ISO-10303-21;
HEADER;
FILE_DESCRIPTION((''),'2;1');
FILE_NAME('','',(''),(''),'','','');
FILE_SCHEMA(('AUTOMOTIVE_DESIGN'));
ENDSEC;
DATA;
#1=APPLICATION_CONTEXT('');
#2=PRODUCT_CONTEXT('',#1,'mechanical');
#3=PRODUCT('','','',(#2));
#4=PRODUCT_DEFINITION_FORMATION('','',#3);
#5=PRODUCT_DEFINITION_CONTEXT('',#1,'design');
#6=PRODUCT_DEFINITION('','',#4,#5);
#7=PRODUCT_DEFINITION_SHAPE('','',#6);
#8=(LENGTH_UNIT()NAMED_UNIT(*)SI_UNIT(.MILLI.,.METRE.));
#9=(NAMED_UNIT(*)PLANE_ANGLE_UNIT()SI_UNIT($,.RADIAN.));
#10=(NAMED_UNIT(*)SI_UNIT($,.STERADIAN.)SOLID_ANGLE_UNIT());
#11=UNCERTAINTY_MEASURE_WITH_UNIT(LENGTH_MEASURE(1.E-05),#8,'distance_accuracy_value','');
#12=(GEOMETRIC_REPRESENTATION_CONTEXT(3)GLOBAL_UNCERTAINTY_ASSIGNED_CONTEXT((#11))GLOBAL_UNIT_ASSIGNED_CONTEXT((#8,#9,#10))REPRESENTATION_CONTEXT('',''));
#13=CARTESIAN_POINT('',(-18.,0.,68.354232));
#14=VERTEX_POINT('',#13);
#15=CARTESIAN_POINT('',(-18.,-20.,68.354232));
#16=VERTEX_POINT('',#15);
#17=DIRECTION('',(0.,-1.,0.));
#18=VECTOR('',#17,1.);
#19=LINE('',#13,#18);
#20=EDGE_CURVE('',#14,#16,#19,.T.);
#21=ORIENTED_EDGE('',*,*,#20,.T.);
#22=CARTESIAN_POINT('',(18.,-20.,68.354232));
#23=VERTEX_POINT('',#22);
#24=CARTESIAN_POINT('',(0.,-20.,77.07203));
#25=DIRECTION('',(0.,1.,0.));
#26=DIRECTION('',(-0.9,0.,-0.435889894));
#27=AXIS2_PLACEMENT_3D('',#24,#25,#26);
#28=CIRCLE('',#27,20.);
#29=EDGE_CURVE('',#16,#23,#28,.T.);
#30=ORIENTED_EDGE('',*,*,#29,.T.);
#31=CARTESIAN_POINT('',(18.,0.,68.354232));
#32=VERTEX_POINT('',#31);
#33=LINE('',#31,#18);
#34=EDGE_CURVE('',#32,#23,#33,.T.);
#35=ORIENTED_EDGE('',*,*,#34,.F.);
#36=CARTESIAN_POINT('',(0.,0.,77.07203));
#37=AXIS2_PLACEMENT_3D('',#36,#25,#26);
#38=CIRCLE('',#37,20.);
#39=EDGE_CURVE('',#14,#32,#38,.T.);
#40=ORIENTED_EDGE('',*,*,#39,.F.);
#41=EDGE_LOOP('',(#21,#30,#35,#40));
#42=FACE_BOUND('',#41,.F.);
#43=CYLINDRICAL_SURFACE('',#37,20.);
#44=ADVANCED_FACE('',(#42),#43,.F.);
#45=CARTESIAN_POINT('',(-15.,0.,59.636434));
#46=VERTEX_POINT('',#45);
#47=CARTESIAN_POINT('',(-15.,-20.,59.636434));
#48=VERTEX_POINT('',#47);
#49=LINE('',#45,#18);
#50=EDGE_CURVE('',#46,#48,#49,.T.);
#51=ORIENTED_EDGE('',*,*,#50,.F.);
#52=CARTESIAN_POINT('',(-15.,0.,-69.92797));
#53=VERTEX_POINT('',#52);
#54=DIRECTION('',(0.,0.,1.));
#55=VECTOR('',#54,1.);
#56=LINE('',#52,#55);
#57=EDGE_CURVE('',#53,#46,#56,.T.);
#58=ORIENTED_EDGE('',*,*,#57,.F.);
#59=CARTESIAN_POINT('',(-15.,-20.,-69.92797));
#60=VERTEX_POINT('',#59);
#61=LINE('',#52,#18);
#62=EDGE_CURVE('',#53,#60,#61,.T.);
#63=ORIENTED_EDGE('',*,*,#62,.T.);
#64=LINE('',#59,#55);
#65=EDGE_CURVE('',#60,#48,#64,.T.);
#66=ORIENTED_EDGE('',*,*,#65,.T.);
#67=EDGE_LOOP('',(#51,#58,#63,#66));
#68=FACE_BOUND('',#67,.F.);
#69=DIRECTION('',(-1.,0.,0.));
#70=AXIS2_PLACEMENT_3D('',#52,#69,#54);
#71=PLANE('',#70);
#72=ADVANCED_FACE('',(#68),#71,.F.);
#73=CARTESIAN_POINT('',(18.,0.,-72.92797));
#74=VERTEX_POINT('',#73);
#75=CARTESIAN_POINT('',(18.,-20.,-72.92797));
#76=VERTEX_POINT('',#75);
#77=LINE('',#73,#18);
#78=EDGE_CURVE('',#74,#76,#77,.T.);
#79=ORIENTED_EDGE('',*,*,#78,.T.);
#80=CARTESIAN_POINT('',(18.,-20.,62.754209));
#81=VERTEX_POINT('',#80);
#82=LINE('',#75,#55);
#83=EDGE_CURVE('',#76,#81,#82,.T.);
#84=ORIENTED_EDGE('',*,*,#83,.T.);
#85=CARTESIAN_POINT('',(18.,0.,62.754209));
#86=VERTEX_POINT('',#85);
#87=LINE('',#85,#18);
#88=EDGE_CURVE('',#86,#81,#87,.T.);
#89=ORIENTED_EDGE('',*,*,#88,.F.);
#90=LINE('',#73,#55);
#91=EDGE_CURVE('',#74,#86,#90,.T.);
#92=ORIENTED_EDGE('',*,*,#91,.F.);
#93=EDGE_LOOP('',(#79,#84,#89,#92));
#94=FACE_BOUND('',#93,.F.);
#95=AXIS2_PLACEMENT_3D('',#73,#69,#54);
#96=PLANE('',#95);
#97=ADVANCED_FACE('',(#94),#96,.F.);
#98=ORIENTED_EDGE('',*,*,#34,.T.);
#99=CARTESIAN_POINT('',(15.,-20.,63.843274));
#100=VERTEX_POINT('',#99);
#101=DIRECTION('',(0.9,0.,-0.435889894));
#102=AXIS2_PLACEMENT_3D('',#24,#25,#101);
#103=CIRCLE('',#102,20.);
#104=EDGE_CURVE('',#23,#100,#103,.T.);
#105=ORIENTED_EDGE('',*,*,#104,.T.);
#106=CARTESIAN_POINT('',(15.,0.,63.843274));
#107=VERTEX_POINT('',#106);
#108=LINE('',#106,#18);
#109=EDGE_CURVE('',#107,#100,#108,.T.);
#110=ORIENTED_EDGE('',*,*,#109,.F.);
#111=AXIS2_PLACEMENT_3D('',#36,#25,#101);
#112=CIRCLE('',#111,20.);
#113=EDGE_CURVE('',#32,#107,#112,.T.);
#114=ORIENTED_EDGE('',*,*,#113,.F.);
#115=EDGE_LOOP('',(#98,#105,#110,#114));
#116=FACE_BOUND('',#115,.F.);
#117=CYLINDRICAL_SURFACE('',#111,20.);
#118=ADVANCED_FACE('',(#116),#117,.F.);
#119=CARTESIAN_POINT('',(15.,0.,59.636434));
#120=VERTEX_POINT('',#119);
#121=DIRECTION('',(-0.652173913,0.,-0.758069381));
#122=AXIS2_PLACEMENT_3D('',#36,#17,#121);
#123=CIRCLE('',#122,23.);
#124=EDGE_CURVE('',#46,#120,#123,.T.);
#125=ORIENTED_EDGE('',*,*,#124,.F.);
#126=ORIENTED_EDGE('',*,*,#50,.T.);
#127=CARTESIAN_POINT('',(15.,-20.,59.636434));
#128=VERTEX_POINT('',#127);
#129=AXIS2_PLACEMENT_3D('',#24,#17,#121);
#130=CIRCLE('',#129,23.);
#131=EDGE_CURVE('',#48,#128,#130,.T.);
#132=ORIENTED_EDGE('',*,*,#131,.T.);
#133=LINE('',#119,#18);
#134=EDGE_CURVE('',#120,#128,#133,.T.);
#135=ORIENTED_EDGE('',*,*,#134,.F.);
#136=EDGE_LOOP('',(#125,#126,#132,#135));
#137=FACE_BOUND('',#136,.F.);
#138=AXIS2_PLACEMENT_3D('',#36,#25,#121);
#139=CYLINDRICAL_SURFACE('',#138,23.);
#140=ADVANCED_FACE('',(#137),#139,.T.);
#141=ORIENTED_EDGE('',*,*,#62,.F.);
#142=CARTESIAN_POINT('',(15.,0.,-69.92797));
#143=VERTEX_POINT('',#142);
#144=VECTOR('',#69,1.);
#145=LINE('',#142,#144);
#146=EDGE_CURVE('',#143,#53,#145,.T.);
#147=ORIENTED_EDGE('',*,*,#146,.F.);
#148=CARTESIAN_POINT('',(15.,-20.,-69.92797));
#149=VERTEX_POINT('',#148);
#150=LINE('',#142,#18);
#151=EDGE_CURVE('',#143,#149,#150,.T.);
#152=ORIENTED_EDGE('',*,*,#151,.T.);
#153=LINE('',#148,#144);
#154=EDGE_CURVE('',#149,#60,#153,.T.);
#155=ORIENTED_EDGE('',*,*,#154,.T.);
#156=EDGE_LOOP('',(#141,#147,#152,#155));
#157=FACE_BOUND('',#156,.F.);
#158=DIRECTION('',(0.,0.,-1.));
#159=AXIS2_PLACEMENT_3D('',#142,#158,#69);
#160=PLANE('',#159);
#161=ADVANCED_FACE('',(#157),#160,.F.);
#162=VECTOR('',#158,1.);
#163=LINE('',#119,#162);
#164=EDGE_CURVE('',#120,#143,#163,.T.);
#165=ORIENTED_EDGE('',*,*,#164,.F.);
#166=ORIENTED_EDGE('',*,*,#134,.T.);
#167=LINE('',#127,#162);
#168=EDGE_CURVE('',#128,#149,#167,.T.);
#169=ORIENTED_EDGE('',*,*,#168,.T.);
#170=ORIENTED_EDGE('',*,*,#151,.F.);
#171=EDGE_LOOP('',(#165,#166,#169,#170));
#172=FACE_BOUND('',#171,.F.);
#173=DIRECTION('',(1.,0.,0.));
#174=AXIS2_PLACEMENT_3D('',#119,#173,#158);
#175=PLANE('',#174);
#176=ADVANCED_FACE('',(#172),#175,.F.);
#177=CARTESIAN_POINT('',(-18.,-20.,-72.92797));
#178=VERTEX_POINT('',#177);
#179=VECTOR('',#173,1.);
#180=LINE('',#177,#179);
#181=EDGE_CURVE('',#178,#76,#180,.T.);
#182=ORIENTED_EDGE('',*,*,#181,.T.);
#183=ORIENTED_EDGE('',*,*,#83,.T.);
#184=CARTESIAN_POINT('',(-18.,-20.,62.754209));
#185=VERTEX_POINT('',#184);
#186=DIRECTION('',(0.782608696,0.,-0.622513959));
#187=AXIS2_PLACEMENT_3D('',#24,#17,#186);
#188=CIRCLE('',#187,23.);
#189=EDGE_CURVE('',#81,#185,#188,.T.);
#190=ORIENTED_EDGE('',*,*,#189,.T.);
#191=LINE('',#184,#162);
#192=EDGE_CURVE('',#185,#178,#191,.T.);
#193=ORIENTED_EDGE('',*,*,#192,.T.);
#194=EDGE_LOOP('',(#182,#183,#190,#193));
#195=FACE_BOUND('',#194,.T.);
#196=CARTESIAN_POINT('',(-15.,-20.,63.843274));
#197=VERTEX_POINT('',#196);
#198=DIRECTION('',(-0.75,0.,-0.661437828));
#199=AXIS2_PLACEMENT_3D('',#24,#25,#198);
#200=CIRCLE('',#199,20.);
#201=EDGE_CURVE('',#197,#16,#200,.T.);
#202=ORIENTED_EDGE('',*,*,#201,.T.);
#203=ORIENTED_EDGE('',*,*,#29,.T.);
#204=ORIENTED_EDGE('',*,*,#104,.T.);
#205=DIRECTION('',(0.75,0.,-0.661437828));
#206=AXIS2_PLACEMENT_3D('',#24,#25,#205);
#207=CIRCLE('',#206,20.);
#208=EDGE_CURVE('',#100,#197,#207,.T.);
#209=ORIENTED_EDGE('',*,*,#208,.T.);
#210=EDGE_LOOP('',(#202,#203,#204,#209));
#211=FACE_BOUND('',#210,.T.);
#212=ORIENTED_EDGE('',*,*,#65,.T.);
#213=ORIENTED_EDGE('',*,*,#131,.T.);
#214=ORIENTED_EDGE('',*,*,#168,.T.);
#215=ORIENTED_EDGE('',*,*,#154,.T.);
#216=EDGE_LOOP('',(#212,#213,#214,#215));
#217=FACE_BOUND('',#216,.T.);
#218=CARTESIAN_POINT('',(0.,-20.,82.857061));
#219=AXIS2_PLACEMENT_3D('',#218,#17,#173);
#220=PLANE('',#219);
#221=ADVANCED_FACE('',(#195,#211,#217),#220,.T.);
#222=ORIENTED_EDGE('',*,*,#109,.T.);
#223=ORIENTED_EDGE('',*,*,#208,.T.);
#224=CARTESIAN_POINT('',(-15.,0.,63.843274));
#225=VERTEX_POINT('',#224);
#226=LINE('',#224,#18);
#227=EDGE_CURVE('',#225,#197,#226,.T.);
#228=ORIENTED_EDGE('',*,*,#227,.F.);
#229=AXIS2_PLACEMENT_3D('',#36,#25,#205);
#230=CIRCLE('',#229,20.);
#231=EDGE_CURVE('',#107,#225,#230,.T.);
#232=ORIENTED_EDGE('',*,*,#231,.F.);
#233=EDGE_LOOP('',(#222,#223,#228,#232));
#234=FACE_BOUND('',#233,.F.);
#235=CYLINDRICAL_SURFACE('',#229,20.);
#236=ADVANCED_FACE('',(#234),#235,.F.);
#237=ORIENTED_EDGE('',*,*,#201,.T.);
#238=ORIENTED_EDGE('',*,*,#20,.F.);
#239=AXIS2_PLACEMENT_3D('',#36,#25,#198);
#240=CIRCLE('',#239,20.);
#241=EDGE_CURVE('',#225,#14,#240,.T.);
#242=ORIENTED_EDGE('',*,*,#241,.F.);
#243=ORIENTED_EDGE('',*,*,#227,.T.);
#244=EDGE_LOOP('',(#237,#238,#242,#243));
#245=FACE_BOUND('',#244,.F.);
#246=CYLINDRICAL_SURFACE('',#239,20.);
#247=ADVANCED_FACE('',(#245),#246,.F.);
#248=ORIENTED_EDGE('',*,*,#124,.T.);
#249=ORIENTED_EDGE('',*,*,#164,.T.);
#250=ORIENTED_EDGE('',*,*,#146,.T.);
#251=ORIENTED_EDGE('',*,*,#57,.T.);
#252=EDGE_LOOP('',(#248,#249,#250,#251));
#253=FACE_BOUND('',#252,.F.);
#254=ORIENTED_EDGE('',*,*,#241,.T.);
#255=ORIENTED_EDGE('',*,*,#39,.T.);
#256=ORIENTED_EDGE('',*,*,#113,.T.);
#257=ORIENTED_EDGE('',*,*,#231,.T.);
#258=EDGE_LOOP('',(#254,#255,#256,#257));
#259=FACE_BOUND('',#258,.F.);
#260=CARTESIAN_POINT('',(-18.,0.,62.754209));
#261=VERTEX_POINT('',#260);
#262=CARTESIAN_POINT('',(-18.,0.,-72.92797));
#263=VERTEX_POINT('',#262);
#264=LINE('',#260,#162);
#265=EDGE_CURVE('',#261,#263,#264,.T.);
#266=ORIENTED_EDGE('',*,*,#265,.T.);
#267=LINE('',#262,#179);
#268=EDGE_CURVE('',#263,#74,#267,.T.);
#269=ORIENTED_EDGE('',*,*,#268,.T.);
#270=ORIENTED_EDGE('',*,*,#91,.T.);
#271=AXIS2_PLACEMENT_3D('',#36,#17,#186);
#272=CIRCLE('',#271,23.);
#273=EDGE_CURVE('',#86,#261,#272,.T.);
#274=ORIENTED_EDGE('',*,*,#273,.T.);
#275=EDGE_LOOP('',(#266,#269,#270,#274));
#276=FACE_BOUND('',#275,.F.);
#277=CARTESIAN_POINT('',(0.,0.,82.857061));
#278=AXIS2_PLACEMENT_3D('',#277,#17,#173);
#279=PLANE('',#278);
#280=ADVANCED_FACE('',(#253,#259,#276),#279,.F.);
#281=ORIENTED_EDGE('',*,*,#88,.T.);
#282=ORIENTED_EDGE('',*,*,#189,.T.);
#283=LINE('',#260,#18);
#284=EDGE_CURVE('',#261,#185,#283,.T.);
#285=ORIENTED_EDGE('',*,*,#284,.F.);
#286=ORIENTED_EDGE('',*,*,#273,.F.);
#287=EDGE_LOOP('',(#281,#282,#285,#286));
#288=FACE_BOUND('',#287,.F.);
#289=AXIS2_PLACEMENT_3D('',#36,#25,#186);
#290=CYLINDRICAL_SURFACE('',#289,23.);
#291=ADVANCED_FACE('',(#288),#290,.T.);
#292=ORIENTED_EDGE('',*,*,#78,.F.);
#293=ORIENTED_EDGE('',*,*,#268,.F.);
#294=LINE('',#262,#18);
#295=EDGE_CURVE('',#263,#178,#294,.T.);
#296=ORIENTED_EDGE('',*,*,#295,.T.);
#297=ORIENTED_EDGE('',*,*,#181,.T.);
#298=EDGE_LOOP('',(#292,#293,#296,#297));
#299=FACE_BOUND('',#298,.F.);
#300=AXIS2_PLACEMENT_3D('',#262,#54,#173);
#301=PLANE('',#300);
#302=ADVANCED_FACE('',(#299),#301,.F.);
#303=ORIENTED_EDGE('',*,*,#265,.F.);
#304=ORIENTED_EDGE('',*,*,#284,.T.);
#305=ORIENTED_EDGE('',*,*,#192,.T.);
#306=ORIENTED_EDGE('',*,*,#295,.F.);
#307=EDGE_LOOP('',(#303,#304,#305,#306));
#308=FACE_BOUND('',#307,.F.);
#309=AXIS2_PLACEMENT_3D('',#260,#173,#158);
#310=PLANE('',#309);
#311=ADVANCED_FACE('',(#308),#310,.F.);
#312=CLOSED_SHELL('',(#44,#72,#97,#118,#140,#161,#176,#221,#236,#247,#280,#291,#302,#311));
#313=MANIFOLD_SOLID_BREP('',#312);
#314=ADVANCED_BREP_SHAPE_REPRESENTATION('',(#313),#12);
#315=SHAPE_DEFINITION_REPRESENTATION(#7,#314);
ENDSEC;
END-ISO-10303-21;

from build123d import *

# Parameters (mm, degrees)
F1_DEPTH = 20


# Not quite as in the source:
# - a feature names something its author has since deleted; it is built from what else it names


with BuildPart() as f1:
    # F0 (on Front) → F1 (new body)
    with BuildSketch(Plane.XZ):
        with BuildLine():
            ThreePointArc((-18, 68.354232338), (-4.472135955, 96.5656189147), (20, 77.072030225))
            ThreePointArc((20, 77.072030225), (19.4935886896, 72.59989427), (18, 68.354232338))
            Line((18, 68.354232338), (18, 62.7542091618))
            ThreePointArc((18, 62.7542091618), (21.7140507506, 69.489154781), (23, 77.072030225))
            ThreePointArc((23, 77.072030225), (-7.5828754441, 98.7860809757), (-18, 62.7542091618))
            Line((-18, 62.7542091618), (-18, 68.354232338))
        make_face()
        with BuildLine():
            ThreePointArc((-15, 63.8432736697), (-16.6534436987, 65.9967057163), (-18, 68.354232338))
            Line((-18, 68.354232338), (-18, 62.7542091618))
            ThreePointArc((-18, 62.7542091618), (-16.5734766958, 61.1246207109), (-15, 59.6364344509))
            Line((-15, 59.6364344509), (-15, 63.8432736697))
        make_face()
        with BuildLine():
            Line((18, 62.7542091618), (18, 68.354232338))
            ThreePointArc((18, 68.354232338), (16.6534436987, 65.9967057163), (15, 63.8432736697))
            Line((15, 63.8432736697), (15, 59.6364344509))
            ThreePointArc((15, 59.6364344509), (16.5734766958, 61.1246207109), (18, 62.7542091618))
        make_face()
        with BuildLine():
            ThreePointArc((15, 63.8432736697), (0, 57.072030225), (-15, 63.8432736697))
            Line((-15, 63.8432736697), (-15, 59.6364344509))
            ThreePointArc((-15, 59.6364344509), (0, 54.072030225), (15, 59.6364344509))
            Line((15, 59.6364344509), (15, 63.8432736697))
        make_face()
        with BuildLine():
            ThreePointArc((-15, 59.6364344509), (-16.5734766958, 61.1246207109), (-18, 62.7542091618))
            Line((-18, 62.7542091618), (-18, -72.927969775))
            Line((-18, -72.927969775), (18, -72.927969775))
            Line((18, -72.927969775), (18, 62.7542091618))
            ThreePointArc((18, 62.7542091618), (16.5734766958, 61.1246207109), (15, 59.6364344509))
            Line((15, 59.6364344509), (15, -69.927969775))
            Line((15, -69.927969775), (-15, -69.927969775))
            Line((-15, -69.927969775), (-15, 59.6364344509))
        make_face()
    extrude(amount=F1_DEPTH)


solid = f1.part
